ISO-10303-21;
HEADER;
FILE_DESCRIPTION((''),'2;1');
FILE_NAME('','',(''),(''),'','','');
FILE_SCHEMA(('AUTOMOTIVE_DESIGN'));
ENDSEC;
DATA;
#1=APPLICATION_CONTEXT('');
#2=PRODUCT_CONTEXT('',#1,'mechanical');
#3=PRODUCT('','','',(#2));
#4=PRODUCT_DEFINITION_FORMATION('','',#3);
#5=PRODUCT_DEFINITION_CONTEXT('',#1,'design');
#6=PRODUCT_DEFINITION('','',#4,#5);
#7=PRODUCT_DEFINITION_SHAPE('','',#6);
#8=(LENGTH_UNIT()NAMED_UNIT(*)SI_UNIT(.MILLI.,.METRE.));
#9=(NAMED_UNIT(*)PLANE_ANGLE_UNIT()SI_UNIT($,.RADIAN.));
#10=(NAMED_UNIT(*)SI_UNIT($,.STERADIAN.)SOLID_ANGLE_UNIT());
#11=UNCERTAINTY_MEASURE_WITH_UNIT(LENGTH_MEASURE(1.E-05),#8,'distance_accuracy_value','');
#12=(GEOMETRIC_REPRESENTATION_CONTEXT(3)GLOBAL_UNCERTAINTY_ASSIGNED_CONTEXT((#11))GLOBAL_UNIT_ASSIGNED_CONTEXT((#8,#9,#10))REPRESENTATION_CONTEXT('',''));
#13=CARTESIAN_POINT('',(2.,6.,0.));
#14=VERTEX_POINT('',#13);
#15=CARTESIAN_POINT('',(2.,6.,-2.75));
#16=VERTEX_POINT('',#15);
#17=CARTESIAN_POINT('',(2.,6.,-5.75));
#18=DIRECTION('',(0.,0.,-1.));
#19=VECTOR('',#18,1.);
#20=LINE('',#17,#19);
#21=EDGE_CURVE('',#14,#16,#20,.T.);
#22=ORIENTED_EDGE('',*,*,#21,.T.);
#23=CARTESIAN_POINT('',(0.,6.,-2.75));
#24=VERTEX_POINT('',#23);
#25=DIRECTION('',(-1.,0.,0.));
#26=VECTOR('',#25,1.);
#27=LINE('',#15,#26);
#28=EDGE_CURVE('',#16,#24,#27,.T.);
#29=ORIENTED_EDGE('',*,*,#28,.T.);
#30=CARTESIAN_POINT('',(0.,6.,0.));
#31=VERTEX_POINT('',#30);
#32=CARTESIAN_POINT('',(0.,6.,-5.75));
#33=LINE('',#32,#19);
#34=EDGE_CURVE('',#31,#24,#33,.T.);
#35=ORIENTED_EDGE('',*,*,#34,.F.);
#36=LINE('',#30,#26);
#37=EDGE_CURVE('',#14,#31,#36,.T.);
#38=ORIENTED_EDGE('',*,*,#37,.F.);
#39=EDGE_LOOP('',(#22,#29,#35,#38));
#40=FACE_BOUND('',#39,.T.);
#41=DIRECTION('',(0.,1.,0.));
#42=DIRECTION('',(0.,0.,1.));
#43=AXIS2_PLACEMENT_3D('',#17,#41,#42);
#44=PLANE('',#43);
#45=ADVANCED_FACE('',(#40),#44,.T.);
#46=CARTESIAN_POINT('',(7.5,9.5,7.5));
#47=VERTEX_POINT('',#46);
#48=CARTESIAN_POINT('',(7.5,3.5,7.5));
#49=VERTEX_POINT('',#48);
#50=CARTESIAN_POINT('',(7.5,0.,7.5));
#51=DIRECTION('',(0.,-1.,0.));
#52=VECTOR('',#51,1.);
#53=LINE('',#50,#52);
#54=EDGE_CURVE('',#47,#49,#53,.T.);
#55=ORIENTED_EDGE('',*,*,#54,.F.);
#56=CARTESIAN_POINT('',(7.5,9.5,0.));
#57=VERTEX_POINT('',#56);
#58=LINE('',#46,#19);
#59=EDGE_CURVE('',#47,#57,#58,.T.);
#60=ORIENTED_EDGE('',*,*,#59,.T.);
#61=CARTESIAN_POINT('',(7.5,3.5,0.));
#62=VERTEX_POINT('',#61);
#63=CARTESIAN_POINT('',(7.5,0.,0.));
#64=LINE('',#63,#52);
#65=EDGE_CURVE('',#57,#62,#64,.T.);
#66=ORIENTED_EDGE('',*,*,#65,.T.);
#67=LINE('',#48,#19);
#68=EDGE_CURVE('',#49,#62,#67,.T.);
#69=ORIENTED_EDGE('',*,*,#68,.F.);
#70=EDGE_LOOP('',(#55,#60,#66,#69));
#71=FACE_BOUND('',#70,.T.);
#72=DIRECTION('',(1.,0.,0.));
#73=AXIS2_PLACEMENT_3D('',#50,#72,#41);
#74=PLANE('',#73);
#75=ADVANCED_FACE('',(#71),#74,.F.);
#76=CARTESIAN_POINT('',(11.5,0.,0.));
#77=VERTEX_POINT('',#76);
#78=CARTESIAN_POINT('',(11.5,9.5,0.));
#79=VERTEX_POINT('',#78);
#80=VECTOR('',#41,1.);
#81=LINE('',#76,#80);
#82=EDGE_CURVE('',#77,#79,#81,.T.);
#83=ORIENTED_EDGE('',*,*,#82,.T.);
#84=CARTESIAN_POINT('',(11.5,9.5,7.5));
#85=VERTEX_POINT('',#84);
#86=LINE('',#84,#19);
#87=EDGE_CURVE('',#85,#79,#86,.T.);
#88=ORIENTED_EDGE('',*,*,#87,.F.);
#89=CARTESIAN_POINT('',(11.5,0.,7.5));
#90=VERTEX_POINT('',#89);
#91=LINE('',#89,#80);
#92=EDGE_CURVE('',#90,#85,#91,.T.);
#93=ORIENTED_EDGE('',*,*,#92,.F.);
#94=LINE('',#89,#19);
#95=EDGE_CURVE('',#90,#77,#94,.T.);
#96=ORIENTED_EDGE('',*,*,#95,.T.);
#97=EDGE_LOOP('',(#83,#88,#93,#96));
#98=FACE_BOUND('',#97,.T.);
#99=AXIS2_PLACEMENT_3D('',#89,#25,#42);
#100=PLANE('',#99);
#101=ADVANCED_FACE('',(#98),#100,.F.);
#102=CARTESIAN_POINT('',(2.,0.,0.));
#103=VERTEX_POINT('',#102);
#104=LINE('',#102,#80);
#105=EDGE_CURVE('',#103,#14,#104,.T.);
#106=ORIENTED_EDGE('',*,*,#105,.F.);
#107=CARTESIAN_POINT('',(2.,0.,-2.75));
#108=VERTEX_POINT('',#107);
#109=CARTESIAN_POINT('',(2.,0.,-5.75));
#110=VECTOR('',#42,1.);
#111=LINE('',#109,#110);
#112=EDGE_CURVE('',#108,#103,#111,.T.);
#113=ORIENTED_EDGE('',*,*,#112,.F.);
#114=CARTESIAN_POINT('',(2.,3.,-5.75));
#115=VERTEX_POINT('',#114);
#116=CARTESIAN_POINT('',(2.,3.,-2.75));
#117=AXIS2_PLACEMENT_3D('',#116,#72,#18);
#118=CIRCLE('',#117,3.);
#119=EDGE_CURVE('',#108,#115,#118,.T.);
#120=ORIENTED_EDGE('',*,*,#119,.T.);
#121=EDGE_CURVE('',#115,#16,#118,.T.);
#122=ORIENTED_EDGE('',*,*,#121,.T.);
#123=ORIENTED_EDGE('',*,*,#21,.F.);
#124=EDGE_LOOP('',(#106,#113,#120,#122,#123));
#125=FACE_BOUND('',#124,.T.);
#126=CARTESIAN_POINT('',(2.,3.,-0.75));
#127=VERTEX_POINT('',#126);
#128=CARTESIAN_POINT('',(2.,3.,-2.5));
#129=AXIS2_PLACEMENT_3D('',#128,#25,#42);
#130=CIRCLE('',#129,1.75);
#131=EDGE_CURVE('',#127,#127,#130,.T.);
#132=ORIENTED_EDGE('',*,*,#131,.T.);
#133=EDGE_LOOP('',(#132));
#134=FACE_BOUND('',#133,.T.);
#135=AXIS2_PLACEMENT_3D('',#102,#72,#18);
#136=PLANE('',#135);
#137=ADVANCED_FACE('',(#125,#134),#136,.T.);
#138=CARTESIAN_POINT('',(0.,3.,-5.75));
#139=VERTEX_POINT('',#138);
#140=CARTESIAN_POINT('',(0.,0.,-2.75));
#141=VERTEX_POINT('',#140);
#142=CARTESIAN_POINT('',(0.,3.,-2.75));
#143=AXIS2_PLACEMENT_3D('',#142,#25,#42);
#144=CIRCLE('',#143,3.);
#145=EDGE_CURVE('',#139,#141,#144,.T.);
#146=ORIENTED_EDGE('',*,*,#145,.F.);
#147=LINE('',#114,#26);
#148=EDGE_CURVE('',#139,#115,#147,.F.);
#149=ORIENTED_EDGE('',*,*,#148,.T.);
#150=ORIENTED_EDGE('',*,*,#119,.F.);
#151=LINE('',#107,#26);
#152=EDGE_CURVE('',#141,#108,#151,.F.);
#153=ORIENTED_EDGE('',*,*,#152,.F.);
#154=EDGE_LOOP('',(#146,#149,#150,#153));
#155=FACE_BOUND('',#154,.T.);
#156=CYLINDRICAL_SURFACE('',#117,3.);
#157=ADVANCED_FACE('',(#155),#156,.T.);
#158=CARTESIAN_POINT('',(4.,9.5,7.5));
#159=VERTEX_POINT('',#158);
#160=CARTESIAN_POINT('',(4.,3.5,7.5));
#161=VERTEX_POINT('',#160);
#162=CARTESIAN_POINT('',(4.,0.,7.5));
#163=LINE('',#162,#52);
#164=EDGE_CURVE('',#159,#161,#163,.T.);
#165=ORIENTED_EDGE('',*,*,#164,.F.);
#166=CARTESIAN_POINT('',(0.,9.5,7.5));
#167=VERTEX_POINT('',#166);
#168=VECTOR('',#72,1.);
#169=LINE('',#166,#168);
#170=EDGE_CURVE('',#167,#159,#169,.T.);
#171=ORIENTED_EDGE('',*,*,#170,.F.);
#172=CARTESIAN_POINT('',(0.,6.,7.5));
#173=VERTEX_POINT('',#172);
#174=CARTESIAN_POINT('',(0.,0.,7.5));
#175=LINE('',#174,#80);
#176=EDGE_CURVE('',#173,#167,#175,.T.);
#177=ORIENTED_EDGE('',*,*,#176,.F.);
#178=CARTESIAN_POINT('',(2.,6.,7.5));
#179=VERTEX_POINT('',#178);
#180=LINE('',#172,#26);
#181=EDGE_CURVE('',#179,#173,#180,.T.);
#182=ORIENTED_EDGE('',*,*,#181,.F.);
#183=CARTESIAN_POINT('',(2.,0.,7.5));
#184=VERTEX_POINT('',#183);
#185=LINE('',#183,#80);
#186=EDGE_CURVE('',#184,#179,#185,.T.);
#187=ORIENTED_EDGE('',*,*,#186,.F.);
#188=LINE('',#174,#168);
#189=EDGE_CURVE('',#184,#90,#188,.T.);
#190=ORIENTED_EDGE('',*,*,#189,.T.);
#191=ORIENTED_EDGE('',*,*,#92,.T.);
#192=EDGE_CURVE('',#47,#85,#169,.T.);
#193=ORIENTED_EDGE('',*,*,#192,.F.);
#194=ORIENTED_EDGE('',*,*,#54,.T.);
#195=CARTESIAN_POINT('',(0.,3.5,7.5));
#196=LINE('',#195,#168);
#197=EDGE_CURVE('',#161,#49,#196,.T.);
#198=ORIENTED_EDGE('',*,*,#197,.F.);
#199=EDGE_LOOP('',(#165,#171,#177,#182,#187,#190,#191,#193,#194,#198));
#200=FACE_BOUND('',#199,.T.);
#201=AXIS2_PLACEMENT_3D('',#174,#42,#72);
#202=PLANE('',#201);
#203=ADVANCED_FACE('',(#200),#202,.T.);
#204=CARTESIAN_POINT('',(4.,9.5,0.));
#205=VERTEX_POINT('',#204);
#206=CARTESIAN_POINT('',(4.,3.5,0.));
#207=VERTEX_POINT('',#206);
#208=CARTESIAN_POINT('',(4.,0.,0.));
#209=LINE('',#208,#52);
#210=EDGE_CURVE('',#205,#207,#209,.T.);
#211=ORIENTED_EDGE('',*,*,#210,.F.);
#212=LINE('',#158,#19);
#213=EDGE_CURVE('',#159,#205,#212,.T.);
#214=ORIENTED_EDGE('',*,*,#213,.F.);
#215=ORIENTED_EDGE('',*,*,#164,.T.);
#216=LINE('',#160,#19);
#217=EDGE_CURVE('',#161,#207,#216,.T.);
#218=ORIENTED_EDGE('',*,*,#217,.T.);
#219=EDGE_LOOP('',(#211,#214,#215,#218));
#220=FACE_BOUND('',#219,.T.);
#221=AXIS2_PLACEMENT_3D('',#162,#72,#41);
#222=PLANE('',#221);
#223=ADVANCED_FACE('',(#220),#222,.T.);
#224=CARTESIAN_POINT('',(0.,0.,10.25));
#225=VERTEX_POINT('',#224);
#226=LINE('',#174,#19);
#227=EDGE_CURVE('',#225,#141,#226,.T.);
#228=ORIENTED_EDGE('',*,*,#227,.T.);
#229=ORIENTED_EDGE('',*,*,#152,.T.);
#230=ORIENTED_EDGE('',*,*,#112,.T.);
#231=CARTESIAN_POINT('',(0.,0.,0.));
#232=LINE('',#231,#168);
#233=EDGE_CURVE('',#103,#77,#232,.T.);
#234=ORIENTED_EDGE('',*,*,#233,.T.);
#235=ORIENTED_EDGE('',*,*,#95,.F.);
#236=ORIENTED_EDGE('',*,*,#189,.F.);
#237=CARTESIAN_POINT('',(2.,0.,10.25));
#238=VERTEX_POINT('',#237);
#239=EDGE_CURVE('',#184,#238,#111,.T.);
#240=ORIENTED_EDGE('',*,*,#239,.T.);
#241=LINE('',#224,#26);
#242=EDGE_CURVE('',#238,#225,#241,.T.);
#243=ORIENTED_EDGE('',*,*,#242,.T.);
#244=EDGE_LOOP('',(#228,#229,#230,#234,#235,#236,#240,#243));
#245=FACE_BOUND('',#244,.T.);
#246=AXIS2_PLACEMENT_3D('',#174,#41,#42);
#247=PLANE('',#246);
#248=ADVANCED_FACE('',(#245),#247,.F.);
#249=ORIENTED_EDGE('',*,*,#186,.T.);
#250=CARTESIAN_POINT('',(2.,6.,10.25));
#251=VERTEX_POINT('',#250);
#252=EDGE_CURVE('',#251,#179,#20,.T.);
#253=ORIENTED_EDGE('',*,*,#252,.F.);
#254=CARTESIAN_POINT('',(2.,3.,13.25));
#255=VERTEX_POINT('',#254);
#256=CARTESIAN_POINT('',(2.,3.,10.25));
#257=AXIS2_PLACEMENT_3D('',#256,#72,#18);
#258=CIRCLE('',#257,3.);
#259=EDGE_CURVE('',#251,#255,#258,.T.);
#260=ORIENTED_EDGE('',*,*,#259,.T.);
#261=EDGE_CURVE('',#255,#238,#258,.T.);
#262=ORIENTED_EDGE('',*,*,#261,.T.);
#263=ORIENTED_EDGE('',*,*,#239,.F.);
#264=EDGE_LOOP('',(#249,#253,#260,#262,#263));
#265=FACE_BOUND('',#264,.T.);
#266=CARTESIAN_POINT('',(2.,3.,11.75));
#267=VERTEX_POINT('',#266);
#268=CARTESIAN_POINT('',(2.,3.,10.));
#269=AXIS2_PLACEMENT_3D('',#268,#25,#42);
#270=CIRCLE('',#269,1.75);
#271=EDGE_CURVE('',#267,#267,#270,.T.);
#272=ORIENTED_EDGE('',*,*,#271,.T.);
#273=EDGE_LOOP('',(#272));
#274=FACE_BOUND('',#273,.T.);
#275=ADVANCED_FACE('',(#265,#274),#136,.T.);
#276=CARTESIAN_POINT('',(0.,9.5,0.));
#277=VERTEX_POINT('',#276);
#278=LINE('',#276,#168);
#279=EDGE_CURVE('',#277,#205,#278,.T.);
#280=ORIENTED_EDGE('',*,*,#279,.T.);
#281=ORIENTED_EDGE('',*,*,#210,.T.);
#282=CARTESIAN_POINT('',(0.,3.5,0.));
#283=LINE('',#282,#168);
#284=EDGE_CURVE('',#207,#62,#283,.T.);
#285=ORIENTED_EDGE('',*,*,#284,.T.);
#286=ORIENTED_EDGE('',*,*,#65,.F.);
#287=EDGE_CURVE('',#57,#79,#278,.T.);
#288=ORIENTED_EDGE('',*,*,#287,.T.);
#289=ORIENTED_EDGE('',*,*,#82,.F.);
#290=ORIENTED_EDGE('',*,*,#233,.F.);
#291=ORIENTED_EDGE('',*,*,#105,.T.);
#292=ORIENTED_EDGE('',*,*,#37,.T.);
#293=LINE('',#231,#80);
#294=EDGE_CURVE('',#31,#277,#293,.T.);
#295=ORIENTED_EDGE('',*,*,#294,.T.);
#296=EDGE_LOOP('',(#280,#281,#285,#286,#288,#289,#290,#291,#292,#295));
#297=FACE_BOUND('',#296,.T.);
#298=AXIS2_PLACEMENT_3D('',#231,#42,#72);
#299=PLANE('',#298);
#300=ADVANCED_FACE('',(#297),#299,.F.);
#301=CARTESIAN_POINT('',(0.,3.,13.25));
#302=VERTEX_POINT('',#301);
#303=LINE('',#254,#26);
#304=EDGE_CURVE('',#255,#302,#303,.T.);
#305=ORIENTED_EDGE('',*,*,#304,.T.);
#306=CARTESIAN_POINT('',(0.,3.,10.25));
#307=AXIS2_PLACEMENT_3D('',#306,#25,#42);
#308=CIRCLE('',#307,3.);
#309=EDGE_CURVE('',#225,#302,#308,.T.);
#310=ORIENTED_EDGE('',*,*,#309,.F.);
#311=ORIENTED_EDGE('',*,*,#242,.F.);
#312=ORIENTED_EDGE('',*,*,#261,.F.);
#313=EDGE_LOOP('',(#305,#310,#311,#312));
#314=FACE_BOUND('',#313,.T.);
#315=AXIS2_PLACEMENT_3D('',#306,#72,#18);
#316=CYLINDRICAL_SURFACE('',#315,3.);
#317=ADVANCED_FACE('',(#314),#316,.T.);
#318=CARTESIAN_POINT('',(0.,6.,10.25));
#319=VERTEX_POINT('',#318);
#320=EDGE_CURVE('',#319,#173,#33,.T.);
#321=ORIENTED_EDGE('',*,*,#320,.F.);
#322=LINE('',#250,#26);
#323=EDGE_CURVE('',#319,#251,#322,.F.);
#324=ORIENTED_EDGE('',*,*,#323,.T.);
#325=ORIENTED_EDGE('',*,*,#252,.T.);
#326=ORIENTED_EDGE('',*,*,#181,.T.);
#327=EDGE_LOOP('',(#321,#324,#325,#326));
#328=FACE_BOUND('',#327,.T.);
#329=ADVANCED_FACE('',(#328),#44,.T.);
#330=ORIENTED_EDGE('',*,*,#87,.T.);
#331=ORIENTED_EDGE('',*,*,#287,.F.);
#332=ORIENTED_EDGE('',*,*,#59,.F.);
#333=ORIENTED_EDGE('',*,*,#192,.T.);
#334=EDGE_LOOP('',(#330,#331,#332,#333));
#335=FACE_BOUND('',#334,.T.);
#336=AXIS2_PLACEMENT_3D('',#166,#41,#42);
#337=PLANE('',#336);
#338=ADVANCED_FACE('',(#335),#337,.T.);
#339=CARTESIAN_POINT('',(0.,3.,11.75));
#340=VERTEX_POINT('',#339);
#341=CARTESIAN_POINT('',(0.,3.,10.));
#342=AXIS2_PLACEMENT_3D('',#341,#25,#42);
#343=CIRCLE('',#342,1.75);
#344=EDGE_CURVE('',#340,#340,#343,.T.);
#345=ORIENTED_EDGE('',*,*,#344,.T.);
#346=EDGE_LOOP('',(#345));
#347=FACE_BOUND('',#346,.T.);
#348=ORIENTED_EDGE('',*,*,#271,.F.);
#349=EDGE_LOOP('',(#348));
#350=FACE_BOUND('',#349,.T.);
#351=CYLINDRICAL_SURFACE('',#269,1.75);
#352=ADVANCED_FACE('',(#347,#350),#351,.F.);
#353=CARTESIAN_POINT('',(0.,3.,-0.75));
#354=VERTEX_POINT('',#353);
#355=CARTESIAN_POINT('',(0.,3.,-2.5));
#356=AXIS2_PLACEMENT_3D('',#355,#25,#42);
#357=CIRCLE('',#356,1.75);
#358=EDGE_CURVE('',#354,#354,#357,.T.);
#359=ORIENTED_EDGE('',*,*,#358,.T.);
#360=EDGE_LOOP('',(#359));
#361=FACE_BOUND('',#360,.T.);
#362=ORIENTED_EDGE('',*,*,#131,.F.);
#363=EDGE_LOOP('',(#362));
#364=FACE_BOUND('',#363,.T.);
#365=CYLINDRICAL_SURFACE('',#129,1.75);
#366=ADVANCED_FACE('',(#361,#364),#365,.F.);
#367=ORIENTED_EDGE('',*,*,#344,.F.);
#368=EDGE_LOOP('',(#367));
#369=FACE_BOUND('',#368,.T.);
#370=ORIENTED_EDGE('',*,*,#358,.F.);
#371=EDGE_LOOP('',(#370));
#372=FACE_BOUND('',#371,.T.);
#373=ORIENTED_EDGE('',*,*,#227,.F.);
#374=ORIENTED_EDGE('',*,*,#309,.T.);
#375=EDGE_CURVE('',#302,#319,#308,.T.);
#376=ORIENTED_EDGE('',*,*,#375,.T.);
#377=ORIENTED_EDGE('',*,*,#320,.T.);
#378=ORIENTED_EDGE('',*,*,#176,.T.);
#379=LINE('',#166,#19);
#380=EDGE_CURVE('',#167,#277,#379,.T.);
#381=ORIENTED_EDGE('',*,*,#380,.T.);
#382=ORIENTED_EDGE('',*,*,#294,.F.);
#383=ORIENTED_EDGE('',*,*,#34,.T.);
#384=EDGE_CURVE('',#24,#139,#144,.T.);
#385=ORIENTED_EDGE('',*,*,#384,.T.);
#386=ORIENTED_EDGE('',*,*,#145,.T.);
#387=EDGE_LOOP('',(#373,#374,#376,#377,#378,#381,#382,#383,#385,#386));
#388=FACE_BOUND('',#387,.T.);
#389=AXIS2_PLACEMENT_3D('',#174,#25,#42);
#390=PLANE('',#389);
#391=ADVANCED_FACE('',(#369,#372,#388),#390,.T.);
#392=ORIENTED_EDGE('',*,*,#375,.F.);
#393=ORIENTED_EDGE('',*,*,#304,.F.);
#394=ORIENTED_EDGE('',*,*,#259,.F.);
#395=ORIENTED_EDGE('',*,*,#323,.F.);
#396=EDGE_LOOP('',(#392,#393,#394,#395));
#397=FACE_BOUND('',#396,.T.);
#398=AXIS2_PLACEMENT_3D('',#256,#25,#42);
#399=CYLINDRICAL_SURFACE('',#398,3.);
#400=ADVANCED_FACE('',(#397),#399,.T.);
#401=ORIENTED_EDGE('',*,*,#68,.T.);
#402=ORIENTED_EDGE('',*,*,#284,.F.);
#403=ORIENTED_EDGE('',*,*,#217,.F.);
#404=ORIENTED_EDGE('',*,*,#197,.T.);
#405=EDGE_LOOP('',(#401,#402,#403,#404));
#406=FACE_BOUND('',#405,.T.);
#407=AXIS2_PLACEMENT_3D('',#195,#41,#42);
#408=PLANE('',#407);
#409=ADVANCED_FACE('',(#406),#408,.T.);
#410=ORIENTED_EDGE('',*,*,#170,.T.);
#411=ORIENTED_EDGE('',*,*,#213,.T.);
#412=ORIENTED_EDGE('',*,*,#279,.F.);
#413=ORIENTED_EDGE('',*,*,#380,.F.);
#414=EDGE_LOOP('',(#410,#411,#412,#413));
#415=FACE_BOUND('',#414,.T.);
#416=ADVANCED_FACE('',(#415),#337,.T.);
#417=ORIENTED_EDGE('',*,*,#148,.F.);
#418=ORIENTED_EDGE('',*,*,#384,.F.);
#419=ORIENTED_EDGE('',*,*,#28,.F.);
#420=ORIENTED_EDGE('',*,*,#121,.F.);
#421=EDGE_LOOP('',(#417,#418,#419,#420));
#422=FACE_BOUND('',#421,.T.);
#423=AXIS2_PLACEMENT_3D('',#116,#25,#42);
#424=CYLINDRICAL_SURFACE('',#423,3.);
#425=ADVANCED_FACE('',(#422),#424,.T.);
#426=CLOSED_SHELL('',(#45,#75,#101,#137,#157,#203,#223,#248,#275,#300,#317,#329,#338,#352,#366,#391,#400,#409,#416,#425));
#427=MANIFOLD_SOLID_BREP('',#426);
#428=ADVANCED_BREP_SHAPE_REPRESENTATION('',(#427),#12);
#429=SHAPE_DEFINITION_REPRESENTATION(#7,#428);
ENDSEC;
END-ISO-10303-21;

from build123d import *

# Parameters (mm, degrees)
BOSS_EXTRUDE2_DEPTH = 7.5
SKETCH3_W           = 19
SKETCH3_H           = 6
SKETCH3_R           = 1.75
BOSS_EXTRUDE3_DEPTH = 2
FILLET1_R           = 3


with BuildPart() as part:
    # Sketch2 → Boss-Extrude2 (new body)
    with BuildSketch(Plane.XY):
        Polygon((0, 9.5), (0, 0), (11.5, 0), (11.5, 9.5), (7.5, 9.5), (7.5, 3.5), (4, 3.5), (4, 9.5), align=None)
    extrude(amount=BOSS_EXTRUDE2_DEPTH)

    # Sketch3 → Boss-Extrude3 (add)
    with BuildSketch(Plane.ZY):
        with Locations((3.75, 3)):
            Rectangle(SKETCH3_W, SKETCH3_H)
        with Locations((-2.5, 3)):
            Circle(SKETCH3_R, mode=Mode.SUBTRACT)
        with Locations((10, 3)):
            Circle(SKETCH3_R, mode=Mode.SUBTRACT)
    extrude(amount=-BOSS_EXTRUDE3_DEPTH)

    # Fillet1
    fillet1_edges = [part.edges().sort_by_distance(p)[0] for p in [
        (1, 0, 13.25),
        (1, 6, 13.25),
        (1, 0, -5.75),
        (1, 6, -5.75),
    ]]
    fillet(fillet1_edges, radius=FILLET1_R - 0.0001)  # a hair under: the kernel refuses the full size


solid = part.part
